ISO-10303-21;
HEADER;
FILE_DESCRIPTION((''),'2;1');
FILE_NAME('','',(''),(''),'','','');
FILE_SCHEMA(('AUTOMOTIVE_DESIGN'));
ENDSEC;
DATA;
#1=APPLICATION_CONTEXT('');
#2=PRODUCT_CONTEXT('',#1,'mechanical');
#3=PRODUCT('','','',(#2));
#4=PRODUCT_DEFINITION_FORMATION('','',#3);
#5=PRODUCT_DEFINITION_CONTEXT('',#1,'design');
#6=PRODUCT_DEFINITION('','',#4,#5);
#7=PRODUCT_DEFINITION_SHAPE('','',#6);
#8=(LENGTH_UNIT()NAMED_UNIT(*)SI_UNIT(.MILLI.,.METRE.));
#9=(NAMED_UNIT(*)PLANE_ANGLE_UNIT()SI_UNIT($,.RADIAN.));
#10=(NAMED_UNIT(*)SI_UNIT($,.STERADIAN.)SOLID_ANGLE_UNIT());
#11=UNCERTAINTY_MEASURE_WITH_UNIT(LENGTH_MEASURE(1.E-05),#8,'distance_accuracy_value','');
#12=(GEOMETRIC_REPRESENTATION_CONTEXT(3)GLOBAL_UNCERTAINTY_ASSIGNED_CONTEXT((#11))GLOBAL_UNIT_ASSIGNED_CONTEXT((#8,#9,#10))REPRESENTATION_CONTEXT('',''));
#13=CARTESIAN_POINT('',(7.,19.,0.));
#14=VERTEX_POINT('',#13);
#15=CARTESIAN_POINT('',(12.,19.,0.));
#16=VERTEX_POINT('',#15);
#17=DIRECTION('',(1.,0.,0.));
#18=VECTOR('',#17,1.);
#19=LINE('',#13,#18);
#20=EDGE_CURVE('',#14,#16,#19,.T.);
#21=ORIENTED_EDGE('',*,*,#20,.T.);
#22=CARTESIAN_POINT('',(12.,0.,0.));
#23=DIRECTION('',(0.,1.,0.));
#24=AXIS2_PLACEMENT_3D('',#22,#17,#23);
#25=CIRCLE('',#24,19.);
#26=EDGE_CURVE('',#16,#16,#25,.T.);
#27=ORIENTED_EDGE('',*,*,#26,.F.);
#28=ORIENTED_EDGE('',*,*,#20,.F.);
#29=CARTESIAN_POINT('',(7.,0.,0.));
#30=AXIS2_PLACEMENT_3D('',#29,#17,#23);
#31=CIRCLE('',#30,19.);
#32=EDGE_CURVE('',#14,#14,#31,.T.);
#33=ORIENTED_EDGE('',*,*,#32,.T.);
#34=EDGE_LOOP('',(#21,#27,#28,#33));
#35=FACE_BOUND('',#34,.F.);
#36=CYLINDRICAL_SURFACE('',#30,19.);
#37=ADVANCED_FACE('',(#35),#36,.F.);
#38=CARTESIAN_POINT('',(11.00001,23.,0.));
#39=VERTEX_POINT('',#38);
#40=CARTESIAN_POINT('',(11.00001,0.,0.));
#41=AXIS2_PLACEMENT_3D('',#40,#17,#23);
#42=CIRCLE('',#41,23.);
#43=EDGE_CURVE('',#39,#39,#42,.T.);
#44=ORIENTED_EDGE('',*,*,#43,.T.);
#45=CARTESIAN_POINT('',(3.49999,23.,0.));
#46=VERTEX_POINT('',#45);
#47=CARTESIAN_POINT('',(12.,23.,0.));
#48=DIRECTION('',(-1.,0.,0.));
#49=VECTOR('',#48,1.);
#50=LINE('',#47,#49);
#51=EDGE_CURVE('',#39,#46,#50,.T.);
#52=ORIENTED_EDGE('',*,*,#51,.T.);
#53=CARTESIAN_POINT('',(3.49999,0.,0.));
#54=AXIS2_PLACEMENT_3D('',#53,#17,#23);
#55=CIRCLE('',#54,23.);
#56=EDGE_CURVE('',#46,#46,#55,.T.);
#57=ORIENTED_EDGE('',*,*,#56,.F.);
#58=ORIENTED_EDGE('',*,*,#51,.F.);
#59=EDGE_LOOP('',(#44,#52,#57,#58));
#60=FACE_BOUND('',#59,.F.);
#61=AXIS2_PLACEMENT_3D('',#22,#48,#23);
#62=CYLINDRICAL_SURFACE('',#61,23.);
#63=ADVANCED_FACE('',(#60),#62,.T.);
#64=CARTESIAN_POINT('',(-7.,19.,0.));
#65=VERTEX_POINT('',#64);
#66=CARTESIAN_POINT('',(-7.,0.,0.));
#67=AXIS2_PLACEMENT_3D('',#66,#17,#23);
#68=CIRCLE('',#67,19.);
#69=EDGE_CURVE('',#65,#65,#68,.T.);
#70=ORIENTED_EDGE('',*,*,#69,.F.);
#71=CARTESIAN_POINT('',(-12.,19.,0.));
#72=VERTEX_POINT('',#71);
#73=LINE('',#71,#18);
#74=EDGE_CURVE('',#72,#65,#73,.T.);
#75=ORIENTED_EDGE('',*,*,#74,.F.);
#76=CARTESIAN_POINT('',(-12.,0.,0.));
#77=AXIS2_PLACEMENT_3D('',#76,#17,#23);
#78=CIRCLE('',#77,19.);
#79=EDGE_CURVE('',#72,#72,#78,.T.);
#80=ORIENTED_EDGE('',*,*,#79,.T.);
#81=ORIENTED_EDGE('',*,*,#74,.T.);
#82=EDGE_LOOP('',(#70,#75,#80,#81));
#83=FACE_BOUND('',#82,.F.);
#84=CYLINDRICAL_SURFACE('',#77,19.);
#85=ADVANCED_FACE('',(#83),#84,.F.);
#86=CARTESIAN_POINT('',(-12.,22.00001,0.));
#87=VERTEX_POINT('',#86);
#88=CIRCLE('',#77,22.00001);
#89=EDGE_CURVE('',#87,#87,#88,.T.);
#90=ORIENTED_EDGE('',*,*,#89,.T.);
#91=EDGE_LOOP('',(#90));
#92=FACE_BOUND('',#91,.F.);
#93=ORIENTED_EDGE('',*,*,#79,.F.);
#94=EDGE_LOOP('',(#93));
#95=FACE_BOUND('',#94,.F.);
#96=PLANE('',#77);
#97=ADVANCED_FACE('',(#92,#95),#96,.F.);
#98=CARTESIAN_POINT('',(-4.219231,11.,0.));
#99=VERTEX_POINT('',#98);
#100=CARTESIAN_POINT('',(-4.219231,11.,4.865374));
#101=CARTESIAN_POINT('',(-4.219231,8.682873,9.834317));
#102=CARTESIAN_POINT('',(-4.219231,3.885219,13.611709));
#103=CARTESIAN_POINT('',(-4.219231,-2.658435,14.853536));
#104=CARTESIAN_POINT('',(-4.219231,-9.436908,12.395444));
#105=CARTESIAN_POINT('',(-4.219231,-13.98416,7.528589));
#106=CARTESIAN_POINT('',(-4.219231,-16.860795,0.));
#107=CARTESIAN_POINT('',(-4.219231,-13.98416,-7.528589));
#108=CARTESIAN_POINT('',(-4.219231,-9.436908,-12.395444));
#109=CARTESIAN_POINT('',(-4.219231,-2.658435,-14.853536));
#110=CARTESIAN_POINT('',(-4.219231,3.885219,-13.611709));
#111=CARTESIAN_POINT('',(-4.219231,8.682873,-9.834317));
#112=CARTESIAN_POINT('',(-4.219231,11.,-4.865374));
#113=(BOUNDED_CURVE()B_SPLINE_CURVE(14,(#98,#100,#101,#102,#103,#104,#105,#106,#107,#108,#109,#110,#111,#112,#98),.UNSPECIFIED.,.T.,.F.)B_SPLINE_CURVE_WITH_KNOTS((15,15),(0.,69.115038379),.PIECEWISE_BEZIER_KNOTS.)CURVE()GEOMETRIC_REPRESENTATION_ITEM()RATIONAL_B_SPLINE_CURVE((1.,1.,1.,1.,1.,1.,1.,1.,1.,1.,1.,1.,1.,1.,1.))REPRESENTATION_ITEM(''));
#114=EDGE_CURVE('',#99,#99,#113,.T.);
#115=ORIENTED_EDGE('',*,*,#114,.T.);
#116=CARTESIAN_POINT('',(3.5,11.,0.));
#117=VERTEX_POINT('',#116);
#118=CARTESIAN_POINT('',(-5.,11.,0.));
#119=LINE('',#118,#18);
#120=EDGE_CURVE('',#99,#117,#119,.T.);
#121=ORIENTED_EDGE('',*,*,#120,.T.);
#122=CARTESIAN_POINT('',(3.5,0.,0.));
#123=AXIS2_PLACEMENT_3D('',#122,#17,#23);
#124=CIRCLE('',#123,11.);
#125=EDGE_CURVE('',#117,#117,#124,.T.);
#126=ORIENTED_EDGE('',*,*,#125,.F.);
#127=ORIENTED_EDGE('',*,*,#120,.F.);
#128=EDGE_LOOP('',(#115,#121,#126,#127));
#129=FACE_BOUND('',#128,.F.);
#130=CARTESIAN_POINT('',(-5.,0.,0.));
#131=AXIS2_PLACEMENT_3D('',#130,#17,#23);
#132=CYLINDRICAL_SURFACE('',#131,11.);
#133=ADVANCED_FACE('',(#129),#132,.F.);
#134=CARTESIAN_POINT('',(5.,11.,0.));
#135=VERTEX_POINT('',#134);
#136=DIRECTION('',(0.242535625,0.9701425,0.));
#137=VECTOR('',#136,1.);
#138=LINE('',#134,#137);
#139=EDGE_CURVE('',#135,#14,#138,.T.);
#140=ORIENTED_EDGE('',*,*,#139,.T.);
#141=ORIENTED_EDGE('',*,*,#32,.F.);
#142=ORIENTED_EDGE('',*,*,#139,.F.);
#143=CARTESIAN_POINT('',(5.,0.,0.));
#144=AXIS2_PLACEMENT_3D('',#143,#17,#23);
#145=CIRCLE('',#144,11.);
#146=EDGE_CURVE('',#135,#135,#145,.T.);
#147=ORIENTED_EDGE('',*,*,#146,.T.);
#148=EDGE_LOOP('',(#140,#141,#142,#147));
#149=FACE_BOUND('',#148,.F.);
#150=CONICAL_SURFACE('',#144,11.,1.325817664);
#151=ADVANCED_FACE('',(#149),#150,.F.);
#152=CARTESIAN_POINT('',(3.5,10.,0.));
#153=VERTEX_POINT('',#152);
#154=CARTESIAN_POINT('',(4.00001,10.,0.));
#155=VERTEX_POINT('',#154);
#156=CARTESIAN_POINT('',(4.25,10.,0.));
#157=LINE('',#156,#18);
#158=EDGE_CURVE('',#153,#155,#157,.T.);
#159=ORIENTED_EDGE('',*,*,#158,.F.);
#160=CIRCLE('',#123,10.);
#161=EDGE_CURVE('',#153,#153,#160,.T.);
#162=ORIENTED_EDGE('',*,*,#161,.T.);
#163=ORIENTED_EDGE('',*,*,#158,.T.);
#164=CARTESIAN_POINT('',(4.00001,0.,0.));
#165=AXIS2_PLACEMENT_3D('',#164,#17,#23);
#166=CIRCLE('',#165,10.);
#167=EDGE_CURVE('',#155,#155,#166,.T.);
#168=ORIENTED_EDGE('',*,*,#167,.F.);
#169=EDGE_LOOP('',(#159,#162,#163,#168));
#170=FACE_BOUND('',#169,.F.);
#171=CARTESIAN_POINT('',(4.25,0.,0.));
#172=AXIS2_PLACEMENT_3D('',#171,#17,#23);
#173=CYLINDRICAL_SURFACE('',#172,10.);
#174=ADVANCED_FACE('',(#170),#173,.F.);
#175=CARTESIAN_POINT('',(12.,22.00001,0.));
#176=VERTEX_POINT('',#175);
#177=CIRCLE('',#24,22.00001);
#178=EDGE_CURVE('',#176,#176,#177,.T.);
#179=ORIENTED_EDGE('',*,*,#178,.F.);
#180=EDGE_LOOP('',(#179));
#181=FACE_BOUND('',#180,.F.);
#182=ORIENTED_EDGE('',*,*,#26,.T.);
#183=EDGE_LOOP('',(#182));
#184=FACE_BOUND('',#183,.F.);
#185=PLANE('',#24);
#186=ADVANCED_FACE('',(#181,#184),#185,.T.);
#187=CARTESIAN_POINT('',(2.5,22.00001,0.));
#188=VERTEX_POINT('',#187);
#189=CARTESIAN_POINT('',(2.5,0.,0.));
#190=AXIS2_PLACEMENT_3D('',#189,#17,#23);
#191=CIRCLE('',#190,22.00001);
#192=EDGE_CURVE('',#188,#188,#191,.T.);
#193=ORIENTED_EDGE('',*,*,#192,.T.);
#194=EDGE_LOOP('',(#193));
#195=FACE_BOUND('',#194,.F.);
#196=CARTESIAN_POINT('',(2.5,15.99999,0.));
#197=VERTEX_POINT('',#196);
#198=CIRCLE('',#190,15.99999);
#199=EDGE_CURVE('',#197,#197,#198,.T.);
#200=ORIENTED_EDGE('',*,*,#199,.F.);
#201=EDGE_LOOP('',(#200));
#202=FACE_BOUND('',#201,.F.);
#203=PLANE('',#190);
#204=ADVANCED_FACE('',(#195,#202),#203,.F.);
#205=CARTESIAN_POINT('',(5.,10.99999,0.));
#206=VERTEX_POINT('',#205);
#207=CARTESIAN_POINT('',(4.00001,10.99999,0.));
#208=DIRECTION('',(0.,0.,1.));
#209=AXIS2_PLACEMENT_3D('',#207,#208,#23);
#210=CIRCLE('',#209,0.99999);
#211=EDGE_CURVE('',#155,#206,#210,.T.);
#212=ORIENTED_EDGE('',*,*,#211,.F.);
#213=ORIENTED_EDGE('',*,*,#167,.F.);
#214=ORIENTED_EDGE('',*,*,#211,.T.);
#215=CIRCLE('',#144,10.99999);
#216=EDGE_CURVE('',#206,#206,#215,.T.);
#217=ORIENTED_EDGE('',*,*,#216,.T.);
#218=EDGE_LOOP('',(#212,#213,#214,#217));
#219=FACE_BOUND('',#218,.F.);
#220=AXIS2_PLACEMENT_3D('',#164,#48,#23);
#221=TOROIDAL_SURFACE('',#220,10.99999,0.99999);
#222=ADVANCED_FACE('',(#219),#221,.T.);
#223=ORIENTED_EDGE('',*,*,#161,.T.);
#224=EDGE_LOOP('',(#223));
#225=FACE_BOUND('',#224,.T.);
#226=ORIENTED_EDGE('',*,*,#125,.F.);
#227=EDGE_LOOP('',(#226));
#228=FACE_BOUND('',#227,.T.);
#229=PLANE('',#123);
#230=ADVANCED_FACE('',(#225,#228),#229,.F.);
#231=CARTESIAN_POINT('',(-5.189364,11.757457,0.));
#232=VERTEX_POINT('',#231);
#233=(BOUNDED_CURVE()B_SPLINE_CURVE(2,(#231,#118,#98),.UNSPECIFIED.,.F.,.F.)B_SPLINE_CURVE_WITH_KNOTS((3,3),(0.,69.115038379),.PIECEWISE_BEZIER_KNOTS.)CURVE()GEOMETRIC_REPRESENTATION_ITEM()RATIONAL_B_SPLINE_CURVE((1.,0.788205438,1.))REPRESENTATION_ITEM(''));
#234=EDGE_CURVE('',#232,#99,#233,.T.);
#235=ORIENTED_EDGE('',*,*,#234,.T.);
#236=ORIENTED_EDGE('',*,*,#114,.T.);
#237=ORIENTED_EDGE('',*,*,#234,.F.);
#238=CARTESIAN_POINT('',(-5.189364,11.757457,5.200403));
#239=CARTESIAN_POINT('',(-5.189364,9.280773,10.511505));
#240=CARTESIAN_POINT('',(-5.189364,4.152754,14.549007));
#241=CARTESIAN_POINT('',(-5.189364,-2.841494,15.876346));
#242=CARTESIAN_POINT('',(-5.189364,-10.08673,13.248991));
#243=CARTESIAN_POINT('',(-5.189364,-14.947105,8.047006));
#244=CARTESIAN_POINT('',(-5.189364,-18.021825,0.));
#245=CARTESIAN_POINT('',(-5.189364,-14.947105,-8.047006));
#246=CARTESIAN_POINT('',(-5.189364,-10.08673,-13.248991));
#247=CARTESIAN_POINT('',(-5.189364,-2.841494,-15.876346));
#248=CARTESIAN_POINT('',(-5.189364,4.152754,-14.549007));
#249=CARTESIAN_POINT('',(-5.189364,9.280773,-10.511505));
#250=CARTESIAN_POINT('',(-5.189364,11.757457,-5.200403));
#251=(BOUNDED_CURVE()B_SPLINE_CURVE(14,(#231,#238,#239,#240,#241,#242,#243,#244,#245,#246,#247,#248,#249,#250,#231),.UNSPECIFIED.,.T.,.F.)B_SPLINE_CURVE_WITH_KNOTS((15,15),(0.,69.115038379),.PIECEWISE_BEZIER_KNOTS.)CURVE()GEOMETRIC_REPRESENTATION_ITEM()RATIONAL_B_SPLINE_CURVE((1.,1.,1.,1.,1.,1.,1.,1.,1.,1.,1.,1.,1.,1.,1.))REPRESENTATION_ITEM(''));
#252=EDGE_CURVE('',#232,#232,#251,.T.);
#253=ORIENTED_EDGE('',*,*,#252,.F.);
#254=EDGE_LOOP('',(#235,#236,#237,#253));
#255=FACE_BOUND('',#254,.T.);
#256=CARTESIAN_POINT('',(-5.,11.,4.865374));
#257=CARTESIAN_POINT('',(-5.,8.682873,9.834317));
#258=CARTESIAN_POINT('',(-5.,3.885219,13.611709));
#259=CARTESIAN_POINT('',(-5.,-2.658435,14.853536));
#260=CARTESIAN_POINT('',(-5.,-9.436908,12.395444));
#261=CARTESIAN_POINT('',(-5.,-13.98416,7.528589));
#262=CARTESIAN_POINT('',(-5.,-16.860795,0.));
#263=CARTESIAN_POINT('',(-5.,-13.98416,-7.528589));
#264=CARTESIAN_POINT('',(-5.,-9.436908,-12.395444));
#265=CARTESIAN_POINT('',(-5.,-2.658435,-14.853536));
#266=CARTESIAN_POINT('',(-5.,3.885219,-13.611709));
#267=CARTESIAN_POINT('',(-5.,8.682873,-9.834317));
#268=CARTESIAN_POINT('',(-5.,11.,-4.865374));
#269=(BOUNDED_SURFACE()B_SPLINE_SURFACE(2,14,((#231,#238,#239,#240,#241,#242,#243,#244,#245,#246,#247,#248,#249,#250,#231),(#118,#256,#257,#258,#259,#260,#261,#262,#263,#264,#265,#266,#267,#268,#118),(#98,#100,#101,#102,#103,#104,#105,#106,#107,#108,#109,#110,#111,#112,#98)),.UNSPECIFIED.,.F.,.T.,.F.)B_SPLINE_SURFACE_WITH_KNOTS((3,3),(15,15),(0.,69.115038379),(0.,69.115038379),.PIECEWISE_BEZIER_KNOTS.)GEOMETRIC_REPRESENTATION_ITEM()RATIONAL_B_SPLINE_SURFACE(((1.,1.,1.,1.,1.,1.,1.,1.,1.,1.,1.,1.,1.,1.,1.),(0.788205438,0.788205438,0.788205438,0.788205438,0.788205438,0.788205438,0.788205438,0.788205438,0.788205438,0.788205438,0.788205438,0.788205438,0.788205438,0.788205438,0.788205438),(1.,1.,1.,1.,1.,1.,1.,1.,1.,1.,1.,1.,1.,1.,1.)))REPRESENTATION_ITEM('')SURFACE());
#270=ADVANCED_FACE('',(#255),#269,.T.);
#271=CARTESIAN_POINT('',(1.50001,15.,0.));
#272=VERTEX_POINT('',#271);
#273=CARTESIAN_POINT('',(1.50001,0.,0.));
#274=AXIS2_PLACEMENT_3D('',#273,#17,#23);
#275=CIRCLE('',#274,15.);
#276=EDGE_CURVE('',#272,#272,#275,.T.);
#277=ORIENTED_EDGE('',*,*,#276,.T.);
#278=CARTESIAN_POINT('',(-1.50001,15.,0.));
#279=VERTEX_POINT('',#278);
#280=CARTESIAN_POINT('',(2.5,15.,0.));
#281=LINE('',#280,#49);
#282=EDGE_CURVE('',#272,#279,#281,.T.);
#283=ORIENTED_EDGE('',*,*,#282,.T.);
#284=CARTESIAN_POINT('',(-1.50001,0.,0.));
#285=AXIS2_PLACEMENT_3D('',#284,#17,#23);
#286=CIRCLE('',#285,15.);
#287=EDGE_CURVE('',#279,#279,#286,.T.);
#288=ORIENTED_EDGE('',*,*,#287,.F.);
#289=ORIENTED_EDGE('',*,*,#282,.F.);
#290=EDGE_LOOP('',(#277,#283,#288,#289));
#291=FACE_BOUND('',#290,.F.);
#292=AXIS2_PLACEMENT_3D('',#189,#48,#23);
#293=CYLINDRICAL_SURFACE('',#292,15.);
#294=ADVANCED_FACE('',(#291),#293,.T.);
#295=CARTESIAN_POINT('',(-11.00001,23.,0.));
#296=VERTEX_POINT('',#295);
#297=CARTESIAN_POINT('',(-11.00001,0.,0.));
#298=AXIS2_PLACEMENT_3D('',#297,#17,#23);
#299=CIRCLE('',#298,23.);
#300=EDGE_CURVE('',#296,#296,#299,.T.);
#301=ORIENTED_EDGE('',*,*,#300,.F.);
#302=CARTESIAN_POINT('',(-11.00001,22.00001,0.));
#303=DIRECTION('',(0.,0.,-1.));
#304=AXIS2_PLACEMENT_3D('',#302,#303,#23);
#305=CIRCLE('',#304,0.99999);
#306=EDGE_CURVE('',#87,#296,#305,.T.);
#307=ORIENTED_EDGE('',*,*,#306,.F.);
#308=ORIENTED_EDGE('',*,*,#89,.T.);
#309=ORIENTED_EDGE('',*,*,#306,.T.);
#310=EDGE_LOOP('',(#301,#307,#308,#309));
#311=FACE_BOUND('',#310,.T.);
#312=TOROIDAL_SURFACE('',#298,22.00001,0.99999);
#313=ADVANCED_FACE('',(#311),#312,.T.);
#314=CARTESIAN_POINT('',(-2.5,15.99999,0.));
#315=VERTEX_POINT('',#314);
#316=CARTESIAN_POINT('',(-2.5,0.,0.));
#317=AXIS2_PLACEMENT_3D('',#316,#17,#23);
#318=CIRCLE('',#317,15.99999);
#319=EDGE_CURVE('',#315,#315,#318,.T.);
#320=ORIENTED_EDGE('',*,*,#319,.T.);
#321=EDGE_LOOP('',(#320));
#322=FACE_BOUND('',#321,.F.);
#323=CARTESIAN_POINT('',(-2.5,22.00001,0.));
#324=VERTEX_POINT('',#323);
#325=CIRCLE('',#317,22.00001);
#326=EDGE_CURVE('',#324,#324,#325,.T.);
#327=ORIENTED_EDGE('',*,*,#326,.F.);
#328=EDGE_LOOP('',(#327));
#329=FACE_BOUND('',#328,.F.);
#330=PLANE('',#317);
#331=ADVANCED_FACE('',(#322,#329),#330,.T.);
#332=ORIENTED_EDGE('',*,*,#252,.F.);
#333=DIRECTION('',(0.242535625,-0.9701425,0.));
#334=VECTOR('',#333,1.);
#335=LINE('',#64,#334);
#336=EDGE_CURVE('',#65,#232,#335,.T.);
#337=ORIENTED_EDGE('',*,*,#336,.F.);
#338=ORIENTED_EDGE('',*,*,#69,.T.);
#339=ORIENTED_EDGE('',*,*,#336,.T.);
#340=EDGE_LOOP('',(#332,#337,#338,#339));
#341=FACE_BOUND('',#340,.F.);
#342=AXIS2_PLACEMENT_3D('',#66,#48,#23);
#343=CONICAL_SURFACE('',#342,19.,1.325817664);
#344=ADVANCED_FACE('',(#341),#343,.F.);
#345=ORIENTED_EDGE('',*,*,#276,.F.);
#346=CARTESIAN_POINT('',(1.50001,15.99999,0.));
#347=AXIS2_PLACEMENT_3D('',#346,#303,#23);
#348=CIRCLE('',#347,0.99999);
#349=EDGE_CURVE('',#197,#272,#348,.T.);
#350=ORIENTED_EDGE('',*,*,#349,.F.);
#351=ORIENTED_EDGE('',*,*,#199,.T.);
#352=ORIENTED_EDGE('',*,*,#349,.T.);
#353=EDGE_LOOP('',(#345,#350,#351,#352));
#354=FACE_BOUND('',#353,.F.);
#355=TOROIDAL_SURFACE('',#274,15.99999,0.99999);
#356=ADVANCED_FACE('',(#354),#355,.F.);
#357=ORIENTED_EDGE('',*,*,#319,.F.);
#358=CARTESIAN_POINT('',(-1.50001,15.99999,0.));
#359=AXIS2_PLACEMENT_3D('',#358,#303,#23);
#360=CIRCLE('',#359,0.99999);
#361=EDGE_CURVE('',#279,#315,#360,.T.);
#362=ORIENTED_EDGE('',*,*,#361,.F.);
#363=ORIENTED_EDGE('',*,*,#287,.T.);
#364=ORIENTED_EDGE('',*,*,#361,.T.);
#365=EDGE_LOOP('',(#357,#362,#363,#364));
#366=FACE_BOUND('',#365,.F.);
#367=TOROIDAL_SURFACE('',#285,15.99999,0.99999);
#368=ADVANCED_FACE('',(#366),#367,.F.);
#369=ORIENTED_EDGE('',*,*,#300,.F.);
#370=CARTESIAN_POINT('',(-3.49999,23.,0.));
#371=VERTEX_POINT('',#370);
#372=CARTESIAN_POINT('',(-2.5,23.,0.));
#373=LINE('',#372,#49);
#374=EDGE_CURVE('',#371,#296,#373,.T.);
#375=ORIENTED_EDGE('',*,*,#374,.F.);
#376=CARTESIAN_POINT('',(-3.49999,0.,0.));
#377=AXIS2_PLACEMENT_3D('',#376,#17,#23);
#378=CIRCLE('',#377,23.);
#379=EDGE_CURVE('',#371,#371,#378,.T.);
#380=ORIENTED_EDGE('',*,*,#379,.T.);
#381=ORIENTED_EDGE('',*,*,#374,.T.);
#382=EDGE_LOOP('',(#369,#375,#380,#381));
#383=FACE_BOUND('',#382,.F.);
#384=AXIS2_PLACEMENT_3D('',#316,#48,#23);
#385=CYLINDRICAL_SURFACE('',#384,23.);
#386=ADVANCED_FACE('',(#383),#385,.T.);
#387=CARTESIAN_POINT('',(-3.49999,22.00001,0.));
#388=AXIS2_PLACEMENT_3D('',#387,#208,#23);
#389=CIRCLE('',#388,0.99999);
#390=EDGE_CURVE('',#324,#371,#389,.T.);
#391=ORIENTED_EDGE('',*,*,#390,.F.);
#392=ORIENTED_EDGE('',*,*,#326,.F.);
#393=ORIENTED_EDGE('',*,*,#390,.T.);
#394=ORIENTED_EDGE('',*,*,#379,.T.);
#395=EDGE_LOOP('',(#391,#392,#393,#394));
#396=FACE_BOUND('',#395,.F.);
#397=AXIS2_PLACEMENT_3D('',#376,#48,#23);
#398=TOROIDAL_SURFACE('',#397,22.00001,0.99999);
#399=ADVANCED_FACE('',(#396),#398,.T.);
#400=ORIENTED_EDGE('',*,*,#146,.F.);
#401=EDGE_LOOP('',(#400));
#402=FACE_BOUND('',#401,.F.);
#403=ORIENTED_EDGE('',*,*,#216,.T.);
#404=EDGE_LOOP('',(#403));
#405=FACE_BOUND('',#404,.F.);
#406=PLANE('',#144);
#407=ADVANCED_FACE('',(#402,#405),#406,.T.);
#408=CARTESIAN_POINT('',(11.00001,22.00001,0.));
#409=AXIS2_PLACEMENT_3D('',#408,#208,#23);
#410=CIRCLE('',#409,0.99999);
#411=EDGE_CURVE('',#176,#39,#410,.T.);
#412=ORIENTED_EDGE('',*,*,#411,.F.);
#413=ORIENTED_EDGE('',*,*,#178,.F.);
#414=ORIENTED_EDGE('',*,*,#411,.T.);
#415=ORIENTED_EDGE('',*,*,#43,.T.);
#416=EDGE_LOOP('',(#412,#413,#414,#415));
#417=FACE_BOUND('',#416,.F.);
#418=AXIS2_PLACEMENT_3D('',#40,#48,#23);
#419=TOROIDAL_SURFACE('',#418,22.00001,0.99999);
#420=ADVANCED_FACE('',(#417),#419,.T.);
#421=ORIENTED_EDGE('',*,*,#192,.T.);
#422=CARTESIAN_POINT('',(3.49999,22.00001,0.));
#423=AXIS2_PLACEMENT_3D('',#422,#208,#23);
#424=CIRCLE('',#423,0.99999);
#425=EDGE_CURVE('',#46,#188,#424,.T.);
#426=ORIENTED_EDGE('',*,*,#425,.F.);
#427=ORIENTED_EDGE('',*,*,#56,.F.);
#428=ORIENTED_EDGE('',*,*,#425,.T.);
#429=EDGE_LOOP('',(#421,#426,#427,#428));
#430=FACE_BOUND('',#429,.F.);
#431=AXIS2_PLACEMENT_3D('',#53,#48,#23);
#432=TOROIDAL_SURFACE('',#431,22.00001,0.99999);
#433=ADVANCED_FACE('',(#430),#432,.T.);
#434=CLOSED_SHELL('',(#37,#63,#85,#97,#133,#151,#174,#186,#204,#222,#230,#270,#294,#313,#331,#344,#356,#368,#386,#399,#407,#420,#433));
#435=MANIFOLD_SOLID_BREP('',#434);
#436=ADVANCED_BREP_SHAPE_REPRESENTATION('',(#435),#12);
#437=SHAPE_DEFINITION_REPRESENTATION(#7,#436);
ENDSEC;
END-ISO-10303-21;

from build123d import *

# Parameters (mm, degrees)
F0_W = 1.5
F0_H = 1
F2_R = 0.99999


# Not quite as in the source:
# - a fillet or chamfer is up to 0.001 mm smaller than in the source, because OpenCascade refuses the exact size


with BuildPart() as f1:
    # F0 (on Top) → F1 (revolve)
    with BuildSketch(Plane.XY):
        Polygon((-12, 23), (-12, 19), (-7, 19), (-5, 11), (3.5, 11), (5, 11), (7, 19), (12, 19), (12, 23), (2.5, 23), (2.5, 15), (-2.5, 15), (-2.5, 23), align=None)
        with Locations((4.25, 10.5)):
            Rectangle(F0_W, F0_H)
    revolve(axis=Axis((0, 0, 0), (1, 0, 0)))

    # F2 (radius 1 in the source; OpenCascade refuses exactly that, so slightly less here)
    f2_edges = [f1.edges().sort_by_distance(p)[0] for p in [
        (-12, -23, 0),
        (-2.5, -23, 0),
        (2.5, -23, 0),
        (12, -23, 0),
        (2.5, -15, 0),
        (-2.5, -15, 0),
        (-5, -11, 0),
        (5, -10, 0),
    ]]
    fillet(f2_edges, radius=F2_R)


solid = f1.part
